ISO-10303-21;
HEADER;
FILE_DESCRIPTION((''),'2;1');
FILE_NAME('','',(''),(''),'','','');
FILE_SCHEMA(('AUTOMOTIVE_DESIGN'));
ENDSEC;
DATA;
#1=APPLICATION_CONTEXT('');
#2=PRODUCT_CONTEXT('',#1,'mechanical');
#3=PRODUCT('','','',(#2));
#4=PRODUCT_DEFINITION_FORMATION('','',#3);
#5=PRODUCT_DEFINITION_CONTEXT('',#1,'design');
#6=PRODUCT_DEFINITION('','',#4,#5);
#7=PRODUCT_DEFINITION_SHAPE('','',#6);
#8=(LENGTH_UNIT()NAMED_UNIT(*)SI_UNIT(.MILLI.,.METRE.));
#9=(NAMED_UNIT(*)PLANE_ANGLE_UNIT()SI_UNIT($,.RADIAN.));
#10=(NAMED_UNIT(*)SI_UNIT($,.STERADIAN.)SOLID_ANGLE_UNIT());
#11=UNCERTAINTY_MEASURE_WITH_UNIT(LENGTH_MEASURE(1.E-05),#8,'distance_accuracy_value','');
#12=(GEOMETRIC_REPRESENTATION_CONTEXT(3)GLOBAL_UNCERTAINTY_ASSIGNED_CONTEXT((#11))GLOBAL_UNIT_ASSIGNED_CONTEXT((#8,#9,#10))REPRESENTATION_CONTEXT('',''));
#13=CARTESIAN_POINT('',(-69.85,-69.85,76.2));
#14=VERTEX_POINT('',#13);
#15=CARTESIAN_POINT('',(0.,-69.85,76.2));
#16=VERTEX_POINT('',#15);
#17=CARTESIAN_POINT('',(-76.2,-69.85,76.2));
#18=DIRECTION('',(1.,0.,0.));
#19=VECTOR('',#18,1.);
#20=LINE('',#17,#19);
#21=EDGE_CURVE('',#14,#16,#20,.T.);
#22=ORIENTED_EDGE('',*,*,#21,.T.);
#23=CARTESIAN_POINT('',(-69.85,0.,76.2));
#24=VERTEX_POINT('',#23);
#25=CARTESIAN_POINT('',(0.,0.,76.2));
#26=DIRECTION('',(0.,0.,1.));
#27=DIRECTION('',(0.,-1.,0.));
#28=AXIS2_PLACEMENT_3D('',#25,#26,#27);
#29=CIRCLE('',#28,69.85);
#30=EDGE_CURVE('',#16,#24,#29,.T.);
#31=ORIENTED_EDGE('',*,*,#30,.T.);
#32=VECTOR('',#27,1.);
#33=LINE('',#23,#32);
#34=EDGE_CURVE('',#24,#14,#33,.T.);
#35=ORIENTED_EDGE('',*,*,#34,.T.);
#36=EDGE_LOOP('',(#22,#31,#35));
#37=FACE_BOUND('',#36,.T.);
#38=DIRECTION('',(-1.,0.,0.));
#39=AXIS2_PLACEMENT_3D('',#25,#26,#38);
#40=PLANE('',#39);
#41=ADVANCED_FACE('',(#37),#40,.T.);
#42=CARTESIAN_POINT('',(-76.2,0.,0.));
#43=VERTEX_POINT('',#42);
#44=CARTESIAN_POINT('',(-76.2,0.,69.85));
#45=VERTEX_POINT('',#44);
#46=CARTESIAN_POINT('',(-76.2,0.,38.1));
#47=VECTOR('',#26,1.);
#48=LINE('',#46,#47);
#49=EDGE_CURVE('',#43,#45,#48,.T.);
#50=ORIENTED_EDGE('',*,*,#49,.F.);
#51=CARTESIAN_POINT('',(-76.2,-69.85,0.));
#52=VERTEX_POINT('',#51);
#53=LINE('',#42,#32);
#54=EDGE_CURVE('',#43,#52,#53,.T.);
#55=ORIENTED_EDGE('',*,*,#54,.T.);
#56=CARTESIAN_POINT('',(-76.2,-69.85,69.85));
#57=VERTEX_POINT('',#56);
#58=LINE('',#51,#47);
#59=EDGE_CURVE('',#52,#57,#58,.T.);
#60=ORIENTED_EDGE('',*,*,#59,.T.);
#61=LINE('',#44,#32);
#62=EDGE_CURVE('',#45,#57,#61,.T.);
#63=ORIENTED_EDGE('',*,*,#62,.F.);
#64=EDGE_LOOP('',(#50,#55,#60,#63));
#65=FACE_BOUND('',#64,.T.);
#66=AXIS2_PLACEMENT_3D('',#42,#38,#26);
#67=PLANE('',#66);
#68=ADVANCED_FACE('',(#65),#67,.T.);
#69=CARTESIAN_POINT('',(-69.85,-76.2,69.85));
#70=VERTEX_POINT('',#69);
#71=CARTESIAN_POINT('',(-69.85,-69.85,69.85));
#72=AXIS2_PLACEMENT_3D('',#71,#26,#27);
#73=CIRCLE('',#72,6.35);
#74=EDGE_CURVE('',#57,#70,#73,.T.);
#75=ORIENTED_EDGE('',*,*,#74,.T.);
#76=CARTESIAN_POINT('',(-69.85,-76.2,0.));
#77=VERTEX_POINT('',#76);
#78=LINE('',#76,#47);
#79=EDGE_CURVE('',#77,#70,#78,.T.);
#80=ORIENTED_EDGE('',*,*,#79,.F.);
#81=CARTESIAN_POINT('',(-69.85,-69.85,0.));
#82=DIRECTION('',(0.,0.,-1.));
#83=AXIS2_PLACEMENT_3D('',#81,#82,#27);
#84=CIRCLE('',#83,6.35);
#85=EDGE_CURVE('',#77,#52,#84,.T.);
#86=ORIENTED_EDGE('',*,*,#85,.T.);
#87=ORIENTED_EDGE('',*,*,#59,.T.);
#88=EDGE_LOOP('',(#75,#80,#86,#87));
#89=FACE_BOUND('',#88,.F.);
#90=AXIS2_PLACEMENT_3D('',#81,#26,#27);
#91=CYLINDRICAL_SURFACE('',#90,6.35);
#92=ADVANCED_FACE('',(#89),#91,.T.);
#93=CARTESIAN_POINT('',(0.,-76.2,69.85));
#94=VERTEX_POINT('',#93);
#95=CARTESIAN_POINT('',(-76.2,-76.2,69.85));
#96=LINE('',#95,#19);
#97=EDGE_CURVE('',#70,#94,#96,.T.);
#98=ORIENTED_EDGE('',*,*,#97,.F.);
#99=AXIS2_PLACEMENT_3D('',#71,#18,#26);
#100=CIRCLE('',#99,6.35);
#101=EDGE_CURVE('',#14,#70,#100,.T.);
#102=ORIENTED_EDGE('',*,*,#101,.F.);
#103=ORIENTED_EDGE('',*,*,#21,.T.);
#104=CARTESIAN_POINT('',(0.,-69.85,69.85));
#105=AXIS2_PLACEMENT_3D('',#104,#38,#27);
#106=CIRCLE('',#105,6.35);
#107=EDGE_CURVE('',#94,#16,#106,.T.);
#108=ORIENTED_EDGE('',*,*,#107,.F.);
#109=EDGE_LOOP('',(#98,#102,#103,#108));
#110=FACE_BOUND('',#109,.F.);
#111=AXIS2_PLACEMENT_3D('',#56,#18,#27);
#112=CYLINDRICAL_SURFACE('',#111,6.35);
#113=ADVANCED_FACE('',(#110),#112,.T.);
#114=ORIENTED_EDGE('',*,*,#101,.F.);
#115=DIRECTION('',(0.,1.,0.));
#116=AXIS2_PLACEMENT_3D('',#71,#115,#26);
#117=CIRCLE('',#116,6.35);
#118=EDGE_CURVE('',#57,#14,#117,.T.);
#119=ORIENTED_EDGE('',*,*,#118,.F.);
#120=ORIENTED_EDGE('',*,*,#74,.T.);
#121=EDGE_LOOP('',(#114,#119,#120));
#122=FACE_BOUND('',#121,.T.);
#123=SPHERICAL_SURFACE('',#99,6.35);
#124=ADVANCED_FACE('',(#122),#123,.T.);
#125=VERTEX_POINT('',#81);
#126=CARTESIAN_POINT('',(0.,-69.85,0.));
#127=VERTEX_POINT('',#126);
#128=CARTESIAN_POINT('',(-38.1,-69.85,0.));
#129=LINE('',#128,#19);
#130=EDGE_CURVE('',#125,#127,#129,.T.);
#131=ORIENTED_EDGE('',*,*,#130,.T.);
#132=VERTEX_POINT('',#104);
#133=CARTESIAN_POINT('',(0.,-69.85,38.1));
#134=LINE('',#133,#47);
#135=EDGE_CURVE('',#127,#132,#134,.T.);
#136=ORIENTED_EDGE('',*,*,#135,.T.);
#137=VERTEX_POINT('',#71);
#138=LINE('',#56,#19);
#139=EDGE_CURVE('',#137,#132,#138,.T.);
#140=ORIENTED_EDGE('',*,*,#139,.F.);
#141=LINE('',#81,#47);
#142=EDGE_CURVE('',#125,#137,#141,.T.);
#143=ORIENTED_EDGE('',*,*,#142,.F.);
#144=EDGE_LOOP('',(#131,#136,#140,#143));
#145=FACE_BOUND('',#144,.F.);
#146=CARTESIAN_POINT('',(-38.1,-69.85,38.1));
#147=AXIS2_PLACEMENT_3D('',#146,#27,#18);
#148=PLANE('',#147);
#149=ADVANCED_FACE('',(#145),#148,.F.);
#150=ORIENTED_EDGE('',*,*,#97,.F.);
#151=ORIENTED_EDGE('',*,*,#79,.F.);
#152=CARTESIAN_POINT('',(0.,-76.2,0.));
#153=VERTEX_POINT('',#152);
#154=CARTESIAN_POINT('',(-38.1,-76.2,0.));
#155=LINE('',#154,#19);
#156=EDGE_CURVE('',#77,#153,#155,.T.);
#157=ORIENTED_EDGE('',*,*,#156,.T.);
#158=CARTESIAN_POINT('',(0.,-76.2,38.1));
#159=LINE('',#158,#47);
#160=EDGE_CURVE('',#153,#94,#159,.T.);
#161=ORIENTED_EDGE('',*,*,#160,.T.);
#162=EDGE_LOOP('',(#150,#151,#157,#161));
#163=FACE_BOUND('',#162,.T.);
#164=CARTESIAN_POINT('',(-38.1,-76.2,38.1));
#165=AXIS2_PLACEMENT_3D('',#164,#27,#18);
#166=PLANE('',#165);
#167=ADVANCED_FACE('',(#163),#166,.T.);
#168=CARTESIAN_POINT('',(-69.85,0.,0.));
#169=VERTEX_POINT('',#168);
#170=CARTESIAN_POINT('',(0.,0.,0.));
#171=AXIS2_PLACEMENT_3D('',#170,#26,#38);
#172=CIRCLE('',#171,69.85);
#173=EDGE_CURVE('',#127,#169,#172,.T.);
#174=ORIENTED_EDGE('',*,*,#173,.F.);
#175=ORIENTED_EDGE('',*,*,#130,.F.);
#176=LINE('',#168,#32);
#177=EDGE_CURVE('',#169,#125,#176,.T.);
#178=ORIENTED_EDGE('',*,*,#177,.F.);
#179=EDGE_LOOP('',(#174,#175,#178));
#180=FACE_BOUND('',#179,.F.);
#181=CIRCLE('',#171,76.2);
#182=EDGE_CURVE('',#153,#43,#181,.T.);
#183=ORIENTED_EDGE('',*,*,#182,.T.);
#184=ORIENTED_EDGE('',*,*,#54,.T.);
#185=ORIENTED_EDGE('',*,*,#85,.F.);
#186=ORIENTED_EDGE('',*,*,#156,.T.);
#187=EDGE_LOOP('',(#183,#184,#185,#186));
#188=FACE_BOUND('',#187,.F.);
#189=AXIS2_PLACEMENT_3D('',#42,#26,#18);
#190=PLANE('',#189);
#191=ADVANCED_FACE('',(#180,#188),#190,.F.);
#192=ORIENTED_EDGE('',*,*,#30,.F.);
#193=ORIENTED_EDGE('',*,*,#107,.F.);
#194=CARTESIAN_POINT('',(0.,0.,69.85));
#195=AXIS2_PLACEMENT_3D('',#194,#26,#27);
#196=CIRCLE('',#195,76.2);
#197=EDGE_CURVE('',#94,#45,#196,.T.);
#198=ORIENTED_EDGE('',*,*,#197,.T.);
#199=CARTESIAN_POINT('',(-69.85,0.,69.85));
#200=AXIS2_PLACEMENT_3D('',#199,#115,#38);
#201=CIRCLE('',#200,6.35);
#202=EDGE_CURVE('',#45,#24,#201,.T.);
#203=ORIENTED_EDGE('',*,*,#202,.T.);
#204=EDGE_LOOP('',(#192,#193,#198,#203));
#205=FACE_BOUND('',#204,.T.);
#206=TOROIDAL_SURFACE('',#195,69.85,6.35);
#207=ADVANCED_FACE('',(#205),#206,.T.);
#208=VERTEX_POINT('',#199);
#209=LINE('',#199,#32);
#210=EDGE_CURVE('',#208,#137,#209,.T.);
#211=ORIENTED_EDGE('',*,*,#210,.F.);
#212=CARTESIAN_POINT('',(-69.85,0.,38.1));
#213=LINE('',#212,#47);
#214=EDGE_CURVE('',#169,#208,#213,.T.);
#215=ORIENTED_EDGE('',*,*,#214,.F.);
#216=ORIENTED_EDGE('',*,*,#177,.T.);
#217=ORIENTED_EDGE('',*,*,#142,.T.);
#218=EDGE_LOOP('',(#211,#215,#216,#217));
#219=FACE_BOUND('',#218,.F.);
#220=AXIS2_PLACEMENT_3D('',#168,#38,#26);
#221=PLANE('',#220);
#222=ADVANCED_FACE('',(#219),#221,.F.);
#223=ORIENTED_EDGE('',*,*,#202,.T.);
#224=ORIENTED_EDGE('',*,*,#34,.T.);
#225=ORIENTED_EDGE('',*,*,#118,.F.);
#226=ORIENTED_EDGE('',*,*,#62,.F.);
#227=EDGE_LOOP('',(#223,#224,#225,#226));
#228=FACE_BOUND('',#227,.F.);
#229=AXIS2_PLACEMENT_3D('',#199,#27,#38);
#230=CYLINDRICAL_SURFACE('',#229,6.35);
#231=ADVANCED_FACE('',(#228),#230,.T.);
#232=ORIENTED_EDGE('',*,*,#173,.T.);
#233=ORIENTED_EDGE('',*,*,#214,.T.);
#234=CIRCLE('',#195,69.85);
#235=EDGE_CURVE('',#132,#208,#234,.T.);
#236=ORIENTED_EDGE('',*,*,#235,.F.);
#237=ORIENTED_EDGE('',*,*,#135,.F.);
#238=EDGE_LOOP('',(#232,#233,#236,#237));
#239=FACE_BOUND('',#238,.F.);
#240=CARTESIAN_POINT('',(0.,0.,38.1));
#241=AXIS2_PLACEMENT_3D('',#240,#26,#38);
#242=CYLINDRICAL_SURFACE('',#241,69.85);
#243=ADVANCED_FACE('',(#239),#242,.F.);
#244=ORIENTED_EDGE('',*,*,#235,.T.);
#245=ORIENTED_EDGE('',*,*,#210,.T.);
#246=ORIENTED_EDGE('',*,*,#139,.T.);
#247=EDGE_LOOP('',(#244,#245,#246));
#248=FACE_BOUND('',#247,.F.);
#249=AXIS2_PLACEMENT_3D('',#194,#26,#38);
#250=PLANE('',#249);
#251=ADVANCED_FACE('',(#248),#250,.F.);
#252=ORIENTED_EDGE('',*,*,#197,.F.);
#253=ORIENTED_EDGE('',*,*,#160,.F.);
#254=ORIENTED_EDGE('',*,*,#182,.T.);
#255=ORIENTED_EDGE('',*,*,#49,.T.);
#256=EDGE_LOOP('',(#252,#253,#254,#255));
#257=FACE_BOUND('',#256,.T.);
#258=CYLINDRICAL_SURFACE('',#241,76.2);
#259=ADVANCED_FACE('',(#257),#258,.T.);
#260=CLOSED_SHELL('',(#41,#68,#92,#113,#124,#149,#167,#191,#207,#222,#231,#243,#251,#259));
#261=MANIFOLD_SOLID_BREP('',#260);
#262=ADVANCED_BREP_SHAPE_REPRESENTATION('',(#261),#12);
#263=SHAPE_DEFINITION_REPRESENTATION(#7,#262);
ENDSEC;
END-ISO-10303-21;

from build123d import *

# Parameters (mm, degrees)
F0_W     = 76.2
F0_H     = 76.2
F1_DEPTH = 76.2
F3_R     = 6.35
F4_T     = 6.35


# Not quite as in the source:
# - a shell that OpenCascade refuses in one call is made with other operations: the cavity is built on its own and cut out


with BuildPart() as f1:
    # F0 (on Front) → F1 (new body)
    with BuildSketch(Plane.XZ):
        with Locations((-38.1, 38.1)):
            Rectangle(F0_W, F0_H)
    extrude(amount=F1_DEPTH)

    # F0 (on Front) → F2 (revolve)
    with BuildSketch(Plane.XZ):
        with Locations((-38.1, 38.1)):
            Rectangle(F0_W, F0_H)
    revolve(axis=Axis((0, 0, 38.1), (0, 0, 1)))

    # F3
    f3_edges = [f1.edges().sort_by_distance(p)[0] for p in [
        (-76.2, -38.1, 76.2),
        (-76.2, -76.2, 38.1),
    ]]
    fillet(f3_edges, radius=F3_R)

    # F4: shell of thickness 6.35, made by hand


with BuildPart() as f4_core1:
    # F4_t2: copy of F1
    add(f1.part)

    # the walls: a layer under each face that stays
    f4_faces = [f4_core1.faces().sort_by_distance(p)[0] for p in [
        (-34.925, -76.2, 34.925),
        (53.8815367264, 53.8815367264, 34.925),
        (-76.2, -34.925, 34.925),
        (0, 0, 76.2),
    ]]
    thicken(f4_faces, amount=-F4_T, mode=Mode.SUBTRACT)


with BuildPart() as f1_1:
    add(f1.part)

    # what is left inside the walls is the cavity
    f4_cavity = [f4_core1.part.solids().sort_by_distance(p)[0] for p in [
        (49.346507, 49.346507, 46.566667),
    ]]
    add(f4_cavity, mode=Mode.SUBTRACT)


solid = f1_1.part
